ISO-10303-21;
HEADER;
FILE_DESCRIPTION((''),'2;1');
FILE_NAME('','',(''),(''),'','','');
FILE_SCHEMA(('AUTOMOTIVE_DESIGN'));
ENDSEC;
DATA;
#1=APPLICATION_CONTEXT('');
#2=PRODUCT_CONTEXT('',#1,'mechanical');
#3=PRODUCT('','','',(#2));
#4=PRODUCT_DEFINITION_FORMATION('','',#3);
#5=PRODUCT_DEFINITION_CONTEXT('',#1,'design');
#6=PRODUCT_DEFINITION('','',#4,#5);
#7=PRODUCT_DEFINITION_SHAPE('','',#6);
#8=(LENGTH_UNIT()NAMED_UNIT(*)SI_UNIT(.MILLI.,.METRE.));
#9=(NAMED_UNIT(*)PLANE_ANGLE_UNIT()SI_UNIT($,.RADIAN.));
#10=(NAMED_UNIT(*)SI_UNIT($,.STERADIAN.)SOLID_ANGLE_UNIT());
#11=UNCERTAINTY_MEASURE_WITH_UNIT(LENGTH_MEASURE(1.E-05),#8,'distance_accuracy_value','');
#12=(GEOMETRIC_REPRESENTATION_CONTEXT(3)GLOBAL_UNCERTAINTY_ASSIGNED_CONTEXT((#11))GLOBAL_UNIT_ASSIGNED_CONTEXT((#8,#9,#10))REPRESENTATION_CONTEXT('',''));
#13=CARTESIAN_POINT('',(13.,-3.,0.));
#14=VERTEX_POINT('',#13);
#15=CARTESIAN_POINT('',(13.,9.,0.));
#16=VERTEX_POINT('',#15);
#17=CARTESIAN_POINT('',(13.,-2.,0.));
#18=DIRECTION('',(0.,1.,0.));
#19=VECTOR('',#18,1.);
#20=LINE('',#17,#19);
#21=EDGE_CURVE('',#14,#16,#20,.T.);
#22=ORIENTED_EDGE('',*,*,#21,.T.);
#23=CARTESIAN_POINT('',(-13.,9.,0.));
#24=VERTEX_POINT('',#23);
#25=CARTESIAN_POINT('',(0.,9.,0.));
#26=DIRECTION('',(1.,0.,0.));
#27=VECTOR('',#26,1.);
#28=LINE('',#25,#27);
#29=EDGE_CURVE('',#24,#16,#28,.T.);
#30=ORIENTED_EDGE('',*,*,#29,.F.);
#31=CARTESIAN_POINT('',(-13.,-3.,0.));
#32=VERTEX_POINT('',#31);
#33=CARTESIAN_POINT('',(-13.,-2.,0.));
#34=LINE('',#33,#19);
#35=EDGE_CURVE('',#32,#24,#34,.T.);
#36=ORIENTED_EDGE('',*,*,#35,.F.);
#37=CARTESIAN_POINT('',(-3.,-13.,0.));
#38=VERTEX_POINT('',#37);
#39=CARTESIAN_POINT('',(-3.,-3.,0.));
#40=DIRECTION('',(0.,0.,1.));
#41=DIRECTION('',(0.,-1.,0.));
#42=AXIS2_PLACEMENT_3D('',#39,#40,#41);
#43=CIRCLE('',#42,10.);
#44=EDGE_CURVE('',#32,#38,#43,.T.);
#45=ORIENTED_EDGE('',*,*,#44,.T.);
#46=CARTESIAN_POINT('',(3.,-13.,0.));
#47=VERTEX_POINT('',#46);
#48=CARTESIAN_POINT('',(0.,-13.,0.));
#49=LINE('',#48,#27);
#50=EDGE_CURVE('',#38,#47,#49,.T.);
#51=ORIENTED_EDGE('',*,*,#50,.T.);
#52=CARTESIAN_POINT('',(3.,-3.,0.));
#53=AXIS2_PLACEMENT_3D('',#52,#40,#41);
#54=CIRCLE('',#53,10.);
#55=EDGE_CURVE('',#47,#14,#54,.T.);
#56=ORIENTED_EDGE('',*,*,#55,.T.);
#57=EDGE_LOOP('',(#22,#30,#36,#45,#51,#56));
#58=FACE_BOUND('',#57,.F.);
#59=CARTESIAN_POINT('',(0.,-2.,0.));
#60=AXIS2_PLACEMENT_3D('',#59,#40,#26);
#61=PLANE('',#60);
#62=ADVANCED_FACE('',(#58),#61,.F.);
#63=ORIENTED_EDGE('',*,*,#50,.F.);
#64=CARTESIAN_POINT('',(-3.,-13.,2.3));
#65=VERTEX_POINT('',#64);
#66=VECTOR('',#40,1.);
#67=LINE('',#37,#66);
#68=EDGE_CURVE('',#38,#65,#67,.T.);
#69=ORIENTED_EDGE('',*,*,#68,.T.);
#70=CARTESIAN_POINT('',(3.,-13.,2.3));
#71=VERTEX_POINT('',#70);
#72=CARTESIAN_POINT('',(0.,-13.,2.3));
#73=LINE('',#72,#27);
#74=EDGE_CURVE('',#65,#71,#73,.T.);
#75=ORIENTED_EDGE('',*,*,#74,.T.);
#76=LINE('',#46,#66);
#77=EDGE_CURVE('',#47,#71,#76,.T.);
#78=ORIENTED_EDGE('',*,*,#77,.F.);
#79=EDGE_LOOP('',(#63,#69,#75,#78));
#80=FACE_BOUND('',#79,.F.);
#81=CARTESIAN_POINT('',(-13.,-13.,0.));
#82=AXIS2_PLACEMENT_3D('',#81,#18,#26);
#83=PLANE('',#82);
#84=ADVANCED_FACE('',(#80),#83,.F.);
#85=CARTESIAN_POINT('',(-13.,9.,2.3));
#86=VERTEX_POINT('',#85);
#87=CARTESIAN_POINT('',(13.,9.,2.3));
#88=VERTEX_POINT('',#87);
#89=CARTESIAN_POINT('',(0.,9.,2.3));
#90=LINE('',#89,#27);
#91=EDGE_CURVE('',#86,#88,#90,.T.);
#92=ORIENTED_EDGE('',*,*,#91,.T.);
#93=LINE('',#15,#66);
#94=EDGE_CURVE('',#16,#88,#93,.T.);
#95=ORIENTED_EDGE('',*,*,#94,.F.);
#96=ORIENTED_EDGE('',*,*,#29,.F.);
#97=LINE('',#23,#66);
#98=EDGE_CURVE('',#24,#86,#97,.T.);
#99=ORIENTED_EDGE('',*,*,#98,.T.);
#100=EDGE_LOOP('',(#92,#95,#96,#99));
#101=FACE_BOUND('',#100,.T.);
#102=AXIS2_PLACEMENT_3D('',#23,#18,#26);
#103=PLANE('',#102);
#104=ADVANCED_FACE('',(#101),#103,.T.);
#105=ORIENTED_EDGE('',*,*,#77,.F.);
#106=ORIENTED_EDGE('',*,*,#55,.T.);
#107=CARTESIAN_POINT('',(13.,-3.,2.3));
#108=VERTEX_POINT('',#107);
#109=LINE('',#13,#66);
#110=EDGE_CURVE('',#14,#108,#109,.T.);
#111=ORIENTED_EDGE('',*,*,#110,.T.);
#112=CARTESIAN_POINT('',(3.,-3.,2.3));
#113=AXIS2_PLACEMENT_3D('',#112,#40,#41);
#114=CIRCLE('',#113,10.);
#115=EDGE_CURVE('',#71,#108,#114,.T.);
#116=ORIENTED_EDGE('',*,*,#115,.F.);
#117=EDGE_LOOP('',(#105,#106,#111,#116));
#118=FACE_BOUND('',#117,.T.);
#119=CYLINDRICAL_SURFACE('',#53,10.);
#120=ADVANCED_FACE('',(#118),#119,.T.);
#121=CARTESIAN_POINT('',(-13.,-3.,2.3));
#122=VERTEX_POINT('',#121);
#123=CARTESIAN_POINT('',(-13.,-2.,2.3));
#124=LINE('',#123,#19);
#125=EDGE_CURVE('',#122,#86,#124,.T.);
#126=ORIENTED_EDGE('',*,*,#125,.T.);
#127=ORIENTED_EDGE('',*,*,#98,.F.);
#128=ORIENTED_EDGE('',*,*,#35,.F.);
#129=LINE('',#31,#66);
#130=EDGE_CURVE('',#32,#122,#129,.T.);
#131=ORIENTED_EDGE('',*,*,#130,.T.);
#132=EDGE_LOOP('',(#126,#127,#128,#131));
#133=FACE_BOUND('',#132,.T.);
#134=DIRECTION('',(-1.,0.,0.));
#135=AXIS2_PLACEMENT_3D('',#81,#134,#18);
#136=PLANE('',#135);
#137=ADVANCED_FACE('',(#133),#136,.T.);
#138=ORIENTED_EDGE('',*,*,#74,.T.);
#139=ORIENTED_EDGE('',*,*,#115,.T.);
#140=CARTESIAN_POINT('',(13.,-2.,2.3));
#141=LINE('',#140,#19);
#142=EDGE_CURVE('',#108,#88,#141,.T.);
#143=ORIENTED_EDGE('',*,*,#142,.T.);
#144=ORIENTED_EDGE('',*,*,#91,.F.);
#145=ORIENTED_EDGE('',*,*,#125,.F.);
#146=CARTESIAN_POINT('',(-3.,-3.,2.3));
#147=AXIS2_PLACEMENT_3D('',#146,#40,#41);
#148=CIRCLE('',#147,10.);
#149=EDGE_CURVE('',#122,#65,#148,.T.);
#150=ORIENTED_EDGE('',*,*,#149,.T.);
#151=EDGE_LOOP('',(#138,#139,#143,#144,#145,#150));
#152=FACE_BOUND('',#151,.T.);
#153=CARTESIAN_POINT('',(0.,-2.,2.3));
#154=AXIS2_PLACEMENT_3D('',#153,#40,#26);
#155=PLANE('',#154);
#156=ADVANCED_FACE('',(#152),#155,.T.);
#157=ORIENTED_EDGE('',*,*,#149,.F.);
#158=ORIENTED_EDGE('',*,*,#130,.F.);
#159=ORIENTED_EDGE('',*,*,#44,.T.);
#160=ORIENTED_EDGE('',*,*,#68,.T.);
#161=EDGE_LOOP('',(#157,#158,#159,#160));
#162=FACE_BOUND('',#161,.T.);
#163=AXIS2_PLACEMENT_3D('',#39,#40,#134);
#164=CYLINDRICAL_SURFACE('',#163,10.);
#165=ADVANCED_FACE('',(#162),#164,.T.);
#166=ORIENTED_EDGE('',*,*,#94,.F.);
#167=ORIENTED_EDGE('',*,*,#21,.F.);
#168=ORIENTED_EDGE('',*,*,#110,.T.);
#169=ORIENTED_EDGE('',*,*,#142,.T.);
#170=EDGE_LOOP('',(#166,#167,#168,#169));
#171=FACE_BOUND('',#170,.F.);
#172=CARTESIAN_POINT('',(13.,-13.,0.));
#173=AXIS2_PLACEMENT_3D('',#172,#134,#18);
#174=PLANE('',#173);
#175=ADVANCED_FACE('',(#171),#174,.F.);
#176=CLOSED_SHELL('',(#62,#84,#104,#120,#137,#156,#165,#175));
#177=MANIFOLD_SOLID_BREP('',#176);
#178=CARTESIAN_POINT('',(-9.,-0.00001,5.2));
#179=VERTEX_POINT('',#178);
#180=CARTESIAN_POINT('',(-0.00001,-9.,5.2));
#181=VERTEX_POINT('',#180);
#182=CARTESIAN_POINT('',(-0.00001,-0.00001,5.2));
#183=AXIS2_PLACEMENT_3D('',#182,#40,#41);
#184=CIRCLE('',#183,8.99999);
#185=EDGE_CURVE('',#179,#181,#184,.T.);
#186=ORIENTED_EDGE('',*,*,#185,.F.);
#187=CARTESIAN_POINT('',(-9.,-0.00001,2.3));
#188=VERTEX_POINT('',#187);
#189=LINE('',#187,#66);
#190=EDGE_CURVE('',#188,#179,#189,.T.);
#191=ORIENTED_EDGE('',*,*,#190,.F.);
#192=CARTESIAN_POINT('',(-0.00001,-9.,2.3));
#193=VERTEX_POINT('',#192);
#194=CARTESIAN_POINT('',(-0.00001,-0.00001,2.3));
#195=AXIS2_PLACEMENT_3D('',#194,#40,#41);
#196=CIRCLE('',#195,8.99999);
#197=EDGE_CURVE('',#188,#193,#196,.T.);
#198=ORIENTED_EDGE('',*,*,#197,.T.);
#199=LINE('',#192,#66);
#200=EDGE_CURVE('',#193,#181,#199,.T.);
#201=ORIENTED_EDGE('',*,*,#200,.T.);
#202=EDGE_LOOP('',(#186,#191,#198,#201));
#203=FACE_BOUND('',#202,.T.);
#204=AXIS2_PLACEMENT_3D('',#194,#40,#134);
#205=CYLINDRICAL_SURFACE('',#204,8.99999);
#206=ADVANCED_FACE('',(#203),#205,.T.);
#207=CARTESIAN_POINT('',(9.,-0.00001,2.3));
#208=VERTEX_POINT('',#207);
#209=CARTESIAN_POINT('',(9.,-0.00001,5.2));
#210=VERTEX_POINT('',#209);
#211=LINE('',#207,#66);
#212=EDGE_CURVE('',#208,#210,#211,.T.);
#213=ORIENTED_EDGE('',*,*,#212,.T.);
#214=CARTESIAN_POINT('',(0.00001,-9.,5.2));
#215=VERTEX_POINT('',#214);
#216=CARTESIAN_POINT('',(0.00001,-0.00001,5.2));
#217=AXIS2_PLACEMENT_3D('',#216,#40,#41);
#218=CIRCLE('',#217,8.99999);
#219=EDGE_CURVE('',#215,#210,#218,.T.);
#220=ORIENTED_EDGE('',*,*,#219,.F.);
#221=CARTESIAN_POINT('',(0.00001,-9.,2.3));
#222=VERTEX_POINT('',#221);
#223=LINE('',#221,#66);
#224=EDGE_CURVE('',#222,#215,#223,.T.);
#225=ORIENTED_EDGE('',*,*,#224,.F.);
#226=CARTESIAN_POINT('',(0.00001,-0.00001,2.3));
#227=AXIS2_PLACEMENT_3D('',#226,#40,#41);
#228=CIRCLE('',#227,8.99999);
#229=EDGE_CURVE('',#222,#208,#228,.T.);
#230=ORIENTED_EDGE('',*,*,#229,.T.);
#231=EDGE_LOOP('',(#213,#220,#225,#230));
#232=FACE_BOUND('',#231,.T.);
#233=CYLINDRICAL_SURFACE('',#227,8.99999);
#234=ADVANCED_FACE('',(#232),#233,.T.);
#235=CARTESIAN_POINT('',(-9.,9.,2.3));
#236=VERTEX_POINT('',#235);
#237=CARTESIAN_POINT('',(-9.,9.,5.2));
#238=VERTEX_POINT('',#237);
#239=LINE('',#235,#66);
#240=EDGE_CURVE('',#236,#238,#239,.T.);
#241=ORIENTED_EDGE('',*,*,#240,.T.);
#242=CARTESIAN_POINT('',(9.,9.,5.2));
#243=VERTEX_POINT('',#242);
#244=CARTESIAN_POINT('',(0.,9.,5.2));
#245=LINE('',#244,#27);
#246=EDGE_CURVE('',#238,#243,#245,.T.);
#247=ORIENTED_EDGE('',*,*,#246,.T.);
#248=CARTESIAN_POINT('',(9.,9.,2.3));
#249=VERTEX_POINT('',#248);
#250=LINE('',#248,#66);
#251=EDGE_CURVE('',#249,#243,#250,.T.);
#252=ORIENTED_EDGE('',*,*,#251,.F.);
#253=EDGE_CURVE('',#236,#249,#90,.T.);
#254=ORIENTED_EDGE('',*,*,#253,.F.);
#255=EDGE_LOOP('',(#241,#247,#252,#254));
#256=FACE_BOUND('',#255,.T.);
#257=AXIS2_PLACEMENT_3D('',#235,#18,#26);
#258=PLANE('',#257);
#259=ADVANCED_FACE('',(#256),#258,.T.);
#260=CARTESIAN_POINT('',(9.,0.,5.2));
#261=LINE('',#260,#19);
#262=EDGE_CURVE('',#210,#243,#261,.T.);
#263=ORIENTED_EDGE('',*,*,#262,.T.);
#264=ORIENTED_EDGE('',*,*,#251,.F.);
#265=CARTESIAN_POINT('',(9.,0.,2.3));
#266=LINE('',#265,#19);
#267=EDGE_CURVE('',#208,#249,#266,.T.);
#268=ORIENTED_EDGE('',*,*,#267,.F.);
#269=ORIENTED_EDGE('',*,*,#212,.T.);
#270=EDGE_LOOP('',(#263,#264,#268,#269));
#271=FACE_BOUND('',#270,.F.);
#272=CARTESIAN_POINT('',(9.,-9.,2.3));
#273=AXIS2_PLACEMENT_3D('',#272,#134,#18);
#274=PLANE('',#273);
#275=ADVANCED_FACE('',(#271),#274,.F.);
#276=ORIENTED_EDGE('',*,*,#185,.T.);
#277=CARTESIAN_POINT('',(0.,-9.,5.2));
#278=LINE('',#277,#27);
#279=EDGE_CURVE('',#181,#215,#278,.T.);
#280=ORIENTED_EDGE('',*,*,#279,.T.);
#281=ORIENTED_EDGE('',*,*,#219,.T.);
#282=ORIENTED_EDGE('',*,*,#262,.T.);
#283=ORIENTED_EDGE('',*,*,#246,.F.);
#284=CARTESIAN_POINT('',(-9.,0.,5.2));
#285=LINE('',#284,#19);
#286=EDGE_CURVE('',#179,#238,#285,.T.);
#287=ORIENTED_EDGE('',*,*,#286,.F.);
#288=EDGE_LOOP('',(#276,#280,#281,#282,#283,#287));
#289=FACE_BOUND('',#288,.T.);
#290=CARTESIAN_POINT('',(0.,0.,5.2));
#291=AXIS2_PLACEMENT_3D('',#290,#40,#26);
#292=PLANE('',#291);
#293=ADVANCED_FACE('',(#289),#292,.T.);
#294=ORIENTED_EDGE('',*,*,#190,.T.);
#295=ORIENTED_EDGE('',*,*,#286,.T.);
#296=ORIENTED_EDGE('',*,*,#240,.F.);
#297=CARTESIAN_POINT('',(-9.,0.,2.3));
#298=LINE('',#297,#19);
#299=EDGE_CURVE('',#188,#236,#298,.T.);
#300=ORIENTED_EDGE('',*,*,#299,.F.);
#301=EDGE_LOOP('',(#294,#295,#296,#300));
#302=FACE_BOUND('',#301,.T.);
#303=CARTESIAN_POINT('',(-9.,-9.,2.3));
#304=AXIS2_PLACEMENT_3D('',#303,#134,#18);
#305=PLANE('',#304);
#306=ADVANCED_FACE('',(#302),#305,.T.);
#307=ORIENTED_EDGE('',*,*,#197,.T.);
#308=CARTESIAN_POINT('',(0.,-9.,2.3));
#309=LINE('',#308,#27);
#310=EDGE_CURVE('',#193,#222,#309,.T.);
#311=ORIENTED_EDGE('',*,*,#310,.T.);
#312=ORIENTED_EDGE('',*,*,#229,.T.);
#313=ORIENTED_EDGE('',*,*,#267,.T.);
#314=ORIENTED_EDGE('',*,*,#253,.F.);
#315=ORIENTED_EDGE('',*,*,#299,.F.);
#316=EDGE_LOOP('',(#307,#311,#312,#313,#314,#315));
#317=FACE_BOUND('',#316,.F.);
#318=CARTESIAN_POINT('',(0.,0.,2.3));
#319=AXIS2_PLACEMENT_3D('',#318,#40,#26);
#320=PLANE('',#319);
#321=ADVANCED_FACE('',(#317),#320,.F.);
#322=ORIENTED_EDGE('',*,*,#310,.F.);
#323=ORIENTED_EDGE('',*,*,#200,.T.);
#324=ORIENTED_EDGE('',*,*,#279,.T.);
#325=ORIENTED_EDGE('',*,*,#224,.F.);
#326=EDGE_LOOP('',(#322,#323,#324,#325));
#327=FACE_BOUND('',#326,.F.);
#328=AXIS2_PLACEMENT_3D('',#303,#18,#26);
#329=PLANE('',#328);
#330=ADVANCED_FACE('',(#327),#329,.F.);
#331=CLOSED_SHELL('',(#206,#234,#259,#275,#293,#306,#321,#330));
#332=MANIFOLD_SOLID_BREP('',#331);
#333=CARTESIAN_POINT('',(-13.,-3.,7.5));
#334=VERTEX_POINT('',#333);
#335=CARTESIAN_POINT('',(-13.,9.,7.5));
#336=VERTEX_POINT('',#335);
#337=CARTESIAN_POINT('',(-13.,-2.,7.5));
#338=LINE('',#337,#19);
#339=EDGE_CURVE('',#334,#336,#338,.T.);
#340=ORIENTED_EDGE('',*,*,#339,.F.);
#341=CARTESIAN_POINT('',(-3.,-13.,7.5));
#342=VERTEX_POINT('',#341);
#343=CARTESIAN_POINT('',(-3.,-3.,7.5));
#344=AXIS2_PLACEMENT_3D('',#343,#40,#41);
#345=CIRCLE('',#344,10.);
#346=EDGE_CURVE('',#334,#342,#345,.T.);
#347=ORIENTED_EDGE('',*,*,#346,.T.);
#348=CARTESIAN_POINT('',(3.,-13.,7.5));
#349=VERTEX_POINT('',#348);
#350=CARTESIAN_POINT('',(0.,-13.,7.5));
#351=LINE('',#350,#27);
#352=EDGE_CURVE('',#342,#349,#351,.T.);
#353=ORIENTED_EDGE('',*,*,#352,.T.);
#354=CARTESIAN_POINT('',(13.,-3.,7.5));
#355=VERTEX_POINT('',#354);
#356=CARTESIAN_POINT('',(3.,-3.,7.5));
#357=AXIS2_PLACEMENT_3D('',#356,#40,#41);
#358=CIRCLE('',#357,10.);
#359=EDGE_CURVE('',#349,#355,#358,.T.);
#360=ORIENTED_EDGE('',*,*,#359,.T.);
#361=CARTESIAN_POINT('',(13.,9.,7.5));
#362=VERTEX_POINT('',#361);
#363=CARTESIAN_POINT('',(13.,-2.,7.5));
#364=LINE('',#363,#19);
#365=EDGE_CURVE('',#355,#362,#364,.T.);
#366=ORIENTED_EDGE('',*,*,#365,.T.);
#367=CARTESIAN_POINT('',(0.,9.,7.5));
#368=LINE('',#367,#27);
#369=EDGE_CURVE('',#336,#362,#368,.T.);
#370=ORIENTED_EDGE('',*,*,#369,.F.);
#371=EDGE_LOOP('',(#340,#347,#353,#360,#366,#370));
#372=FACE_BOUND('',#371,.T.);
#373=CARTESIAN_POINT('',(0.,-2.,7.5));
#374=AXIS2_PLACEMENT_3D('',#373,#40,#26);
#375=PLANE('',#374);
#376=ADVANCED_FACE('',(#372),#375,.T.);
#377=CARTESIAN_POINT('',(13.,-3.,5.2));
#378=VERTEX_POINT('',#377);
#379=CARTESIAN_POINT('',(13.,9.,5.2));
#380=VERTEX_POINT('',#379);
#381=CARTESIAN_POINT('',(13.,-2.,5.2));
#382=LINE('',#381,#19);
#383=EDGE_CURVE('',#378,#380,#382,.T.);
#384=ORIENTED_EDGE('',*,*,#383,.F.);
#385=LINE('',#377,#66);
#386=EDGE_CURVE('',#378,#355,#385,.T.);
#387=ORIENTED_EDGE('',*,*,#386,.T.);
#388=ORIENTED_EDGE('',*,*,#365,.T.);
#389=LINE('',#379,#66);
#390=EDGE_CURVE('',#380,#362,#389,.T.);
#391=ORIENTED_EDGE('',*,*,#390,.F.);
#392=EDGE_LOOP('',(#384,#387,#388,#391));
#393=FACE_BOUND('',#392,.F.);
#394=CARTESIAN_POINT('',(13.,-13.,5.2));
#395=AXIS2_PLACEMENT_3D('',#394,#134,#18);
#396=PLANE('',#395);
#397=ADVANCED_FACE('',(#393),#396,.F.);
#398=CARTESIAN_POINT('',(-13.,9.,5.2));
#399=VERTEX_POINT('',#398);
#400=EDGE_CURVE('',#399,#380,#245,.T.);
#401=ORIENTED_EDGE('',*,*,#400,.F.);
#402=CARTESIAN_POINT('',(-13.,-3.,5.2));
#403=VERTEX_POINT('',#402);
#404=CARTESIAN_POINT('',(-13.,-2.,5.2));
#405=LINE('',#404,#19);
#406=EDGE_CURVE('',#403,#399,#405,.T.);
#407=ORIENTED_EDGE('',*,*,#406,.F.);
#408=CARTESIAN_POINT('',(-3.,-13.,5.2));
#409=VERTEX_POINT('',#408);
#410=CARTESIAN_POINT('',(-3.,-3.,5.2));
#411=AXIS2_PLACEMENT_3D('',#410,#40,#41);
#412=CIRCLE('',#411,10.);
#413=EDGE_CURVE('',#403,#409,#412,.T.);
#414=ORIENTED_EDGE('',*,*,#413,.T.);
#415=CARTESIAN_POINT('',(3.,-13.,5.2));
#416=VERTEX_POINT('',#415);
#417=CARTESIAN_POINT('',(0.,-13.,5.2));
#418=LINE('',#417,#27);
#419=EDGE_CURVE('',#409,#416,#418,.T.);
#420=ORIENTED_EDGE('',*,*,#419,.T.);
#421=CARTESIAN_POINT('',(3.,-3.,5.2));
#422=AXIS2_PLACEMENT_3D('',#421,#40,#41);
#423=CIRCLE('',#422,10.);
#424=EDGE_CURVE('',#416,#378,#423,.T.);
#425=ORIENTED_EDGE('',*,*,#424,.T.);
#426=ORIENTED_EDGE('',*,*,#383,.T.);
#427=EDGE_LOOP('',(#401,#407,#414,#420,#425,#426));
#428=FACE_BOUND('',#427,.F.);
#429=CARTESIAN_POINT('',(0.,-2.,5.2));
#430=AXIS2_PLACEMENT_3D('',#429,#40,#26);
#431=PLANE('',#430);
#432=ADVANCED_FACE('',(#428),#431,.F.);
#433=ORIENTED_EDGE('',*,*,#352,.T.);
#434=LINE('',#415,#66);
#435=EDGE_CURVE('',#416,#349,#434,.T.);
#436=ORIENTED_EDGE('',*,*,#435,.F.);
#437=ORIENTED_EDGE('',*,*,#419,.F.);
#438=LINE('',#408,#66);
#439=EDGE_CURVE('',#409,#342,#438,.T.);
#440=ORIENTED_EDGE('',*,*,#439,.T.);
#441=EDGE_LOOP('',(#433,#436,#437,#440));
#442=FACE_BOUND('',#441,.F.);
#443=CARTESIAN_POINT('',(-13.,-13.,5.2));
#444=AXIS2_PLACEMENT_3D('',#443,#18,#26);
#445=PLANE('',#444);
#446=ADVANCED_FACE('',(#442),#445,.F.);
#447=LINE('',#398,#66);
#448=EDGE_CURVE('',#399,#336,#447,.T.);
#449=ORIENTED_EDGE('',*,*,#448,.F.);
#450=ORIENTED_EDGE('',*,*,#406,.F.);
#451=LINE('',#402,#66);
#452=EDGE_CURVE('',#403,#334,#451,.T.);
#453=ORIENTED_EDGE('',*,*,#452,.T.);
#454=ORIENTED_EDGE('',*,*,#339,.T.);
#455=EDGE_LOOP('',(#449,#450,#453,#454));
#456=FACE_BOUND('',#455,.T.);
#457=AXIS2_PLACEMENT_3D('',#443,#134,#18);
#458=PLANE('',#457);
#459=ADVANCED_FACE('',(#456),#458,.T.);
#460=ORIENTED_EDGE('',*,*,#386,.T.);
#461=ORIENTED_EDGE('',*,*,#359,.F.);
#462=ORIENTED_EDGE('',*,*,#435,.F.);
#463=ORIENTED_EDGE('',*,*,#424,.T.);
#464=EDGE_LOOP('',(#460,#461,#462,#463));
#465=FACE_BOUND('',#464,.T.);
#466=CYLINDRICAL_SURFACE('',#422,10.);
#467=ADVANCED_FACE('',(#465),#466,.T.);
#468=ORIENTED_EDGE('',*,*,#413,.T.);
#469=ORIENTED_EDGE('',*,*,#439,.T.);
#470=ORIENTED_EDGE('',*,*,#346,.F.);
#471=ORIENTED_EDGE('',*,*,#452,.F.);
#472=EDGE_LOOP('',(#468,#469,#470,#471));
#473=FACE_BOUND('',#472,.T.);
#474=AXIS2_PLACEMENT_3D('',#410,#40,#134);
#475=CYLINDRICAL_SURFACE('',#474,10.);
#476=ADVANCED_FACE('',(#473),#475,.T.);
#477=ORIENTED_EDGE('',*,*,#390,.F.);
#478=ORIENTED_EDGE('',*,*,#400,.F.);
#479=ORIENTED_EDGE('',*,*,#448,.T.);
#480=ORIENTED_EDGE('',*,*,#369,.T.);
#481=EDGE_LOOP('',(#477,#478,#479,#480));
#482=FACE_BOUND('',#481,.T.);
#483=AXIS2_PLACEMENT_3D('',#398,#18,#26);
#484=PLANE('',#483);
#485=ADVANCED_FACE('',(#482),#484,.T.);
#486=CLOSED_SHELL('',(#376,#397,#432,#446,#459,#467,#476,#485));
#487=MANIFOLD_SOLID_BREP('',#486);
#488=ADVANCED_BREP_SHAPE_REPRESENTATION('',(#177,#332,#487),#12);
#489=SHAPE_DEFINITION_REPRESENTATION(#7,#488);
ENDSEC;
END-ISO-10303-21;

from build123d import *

# Parameters (mm, degrees)
F1_W     = 26
F1_H     = 22
F2_DEPTH = 2.3
F3_START = 5.2
F3_DEPTH = 2.3
F4_START = 2.3
F0_W     = 18
F0_H     = 18
F4_DEPTH = 2.9
F5_R     = 8.99999
F6_R     = 10
F6_2_R   = 10


# Not quite as in the source:
# - a fillet or chamfer is up to 0.001 mm smaller than in the source, because OpenCascade refuses the exact size


with BuildPart() as f2:
    # F1 (on Top) → F2 (new body)
    with BuildSketch(Plane.XY):
        with Locations((0, -2)):
            Rectangle(F1_W, F1_H)
    extrude(amount=F2_DEPTH)

    # F6#2
    f6_2_edges = [f2.edges().sort_by_distance(p)[0] for p in [
        (13, -13, 1.15),
        (-13, -13, 1.15),
    ]]
    fillet(f6_2_edges, radius=F6_2_R)


with BuildPart() as f3:
    # F1 (on Top) → F3 (new body)
    with BuildSketch(Plane.XY.offset(F3_START)):
        with Locations((0, -2)):
            Rectangle(F1_W, F1_H)
    extrude(amount=F3_DEPTH)

    # F6
    f6_edges = [f3.edges().sort_by_distance(p)[0] for p in [
        (-13, -13, 6.35),
        (13, -13, 6.35),
    ]]
    fillet(f6_edges, radius=F6_R)


with BuildPart() as f4:
    # F0 (on Top) → F4 (new body)
    with BuildSketch(Plane.XY.offset(F4_START)):
        Rectangle(F0_W, F0_H)
    extrude(amount=F4_DEPTH)

    # F5 (radius 9 in the source; OpenCascade refuses exactly that, so slightly less here)
    f5_edges = [f4.edges().sort_by_distance(p)[0] for p in [
        (-9, -9, 3.75),
        (9, -9, 3.75),
    ]]
    fillet(f5_edges, radius=F5_R)


solid = Compound([f2.part, f3.part, f4.part])
